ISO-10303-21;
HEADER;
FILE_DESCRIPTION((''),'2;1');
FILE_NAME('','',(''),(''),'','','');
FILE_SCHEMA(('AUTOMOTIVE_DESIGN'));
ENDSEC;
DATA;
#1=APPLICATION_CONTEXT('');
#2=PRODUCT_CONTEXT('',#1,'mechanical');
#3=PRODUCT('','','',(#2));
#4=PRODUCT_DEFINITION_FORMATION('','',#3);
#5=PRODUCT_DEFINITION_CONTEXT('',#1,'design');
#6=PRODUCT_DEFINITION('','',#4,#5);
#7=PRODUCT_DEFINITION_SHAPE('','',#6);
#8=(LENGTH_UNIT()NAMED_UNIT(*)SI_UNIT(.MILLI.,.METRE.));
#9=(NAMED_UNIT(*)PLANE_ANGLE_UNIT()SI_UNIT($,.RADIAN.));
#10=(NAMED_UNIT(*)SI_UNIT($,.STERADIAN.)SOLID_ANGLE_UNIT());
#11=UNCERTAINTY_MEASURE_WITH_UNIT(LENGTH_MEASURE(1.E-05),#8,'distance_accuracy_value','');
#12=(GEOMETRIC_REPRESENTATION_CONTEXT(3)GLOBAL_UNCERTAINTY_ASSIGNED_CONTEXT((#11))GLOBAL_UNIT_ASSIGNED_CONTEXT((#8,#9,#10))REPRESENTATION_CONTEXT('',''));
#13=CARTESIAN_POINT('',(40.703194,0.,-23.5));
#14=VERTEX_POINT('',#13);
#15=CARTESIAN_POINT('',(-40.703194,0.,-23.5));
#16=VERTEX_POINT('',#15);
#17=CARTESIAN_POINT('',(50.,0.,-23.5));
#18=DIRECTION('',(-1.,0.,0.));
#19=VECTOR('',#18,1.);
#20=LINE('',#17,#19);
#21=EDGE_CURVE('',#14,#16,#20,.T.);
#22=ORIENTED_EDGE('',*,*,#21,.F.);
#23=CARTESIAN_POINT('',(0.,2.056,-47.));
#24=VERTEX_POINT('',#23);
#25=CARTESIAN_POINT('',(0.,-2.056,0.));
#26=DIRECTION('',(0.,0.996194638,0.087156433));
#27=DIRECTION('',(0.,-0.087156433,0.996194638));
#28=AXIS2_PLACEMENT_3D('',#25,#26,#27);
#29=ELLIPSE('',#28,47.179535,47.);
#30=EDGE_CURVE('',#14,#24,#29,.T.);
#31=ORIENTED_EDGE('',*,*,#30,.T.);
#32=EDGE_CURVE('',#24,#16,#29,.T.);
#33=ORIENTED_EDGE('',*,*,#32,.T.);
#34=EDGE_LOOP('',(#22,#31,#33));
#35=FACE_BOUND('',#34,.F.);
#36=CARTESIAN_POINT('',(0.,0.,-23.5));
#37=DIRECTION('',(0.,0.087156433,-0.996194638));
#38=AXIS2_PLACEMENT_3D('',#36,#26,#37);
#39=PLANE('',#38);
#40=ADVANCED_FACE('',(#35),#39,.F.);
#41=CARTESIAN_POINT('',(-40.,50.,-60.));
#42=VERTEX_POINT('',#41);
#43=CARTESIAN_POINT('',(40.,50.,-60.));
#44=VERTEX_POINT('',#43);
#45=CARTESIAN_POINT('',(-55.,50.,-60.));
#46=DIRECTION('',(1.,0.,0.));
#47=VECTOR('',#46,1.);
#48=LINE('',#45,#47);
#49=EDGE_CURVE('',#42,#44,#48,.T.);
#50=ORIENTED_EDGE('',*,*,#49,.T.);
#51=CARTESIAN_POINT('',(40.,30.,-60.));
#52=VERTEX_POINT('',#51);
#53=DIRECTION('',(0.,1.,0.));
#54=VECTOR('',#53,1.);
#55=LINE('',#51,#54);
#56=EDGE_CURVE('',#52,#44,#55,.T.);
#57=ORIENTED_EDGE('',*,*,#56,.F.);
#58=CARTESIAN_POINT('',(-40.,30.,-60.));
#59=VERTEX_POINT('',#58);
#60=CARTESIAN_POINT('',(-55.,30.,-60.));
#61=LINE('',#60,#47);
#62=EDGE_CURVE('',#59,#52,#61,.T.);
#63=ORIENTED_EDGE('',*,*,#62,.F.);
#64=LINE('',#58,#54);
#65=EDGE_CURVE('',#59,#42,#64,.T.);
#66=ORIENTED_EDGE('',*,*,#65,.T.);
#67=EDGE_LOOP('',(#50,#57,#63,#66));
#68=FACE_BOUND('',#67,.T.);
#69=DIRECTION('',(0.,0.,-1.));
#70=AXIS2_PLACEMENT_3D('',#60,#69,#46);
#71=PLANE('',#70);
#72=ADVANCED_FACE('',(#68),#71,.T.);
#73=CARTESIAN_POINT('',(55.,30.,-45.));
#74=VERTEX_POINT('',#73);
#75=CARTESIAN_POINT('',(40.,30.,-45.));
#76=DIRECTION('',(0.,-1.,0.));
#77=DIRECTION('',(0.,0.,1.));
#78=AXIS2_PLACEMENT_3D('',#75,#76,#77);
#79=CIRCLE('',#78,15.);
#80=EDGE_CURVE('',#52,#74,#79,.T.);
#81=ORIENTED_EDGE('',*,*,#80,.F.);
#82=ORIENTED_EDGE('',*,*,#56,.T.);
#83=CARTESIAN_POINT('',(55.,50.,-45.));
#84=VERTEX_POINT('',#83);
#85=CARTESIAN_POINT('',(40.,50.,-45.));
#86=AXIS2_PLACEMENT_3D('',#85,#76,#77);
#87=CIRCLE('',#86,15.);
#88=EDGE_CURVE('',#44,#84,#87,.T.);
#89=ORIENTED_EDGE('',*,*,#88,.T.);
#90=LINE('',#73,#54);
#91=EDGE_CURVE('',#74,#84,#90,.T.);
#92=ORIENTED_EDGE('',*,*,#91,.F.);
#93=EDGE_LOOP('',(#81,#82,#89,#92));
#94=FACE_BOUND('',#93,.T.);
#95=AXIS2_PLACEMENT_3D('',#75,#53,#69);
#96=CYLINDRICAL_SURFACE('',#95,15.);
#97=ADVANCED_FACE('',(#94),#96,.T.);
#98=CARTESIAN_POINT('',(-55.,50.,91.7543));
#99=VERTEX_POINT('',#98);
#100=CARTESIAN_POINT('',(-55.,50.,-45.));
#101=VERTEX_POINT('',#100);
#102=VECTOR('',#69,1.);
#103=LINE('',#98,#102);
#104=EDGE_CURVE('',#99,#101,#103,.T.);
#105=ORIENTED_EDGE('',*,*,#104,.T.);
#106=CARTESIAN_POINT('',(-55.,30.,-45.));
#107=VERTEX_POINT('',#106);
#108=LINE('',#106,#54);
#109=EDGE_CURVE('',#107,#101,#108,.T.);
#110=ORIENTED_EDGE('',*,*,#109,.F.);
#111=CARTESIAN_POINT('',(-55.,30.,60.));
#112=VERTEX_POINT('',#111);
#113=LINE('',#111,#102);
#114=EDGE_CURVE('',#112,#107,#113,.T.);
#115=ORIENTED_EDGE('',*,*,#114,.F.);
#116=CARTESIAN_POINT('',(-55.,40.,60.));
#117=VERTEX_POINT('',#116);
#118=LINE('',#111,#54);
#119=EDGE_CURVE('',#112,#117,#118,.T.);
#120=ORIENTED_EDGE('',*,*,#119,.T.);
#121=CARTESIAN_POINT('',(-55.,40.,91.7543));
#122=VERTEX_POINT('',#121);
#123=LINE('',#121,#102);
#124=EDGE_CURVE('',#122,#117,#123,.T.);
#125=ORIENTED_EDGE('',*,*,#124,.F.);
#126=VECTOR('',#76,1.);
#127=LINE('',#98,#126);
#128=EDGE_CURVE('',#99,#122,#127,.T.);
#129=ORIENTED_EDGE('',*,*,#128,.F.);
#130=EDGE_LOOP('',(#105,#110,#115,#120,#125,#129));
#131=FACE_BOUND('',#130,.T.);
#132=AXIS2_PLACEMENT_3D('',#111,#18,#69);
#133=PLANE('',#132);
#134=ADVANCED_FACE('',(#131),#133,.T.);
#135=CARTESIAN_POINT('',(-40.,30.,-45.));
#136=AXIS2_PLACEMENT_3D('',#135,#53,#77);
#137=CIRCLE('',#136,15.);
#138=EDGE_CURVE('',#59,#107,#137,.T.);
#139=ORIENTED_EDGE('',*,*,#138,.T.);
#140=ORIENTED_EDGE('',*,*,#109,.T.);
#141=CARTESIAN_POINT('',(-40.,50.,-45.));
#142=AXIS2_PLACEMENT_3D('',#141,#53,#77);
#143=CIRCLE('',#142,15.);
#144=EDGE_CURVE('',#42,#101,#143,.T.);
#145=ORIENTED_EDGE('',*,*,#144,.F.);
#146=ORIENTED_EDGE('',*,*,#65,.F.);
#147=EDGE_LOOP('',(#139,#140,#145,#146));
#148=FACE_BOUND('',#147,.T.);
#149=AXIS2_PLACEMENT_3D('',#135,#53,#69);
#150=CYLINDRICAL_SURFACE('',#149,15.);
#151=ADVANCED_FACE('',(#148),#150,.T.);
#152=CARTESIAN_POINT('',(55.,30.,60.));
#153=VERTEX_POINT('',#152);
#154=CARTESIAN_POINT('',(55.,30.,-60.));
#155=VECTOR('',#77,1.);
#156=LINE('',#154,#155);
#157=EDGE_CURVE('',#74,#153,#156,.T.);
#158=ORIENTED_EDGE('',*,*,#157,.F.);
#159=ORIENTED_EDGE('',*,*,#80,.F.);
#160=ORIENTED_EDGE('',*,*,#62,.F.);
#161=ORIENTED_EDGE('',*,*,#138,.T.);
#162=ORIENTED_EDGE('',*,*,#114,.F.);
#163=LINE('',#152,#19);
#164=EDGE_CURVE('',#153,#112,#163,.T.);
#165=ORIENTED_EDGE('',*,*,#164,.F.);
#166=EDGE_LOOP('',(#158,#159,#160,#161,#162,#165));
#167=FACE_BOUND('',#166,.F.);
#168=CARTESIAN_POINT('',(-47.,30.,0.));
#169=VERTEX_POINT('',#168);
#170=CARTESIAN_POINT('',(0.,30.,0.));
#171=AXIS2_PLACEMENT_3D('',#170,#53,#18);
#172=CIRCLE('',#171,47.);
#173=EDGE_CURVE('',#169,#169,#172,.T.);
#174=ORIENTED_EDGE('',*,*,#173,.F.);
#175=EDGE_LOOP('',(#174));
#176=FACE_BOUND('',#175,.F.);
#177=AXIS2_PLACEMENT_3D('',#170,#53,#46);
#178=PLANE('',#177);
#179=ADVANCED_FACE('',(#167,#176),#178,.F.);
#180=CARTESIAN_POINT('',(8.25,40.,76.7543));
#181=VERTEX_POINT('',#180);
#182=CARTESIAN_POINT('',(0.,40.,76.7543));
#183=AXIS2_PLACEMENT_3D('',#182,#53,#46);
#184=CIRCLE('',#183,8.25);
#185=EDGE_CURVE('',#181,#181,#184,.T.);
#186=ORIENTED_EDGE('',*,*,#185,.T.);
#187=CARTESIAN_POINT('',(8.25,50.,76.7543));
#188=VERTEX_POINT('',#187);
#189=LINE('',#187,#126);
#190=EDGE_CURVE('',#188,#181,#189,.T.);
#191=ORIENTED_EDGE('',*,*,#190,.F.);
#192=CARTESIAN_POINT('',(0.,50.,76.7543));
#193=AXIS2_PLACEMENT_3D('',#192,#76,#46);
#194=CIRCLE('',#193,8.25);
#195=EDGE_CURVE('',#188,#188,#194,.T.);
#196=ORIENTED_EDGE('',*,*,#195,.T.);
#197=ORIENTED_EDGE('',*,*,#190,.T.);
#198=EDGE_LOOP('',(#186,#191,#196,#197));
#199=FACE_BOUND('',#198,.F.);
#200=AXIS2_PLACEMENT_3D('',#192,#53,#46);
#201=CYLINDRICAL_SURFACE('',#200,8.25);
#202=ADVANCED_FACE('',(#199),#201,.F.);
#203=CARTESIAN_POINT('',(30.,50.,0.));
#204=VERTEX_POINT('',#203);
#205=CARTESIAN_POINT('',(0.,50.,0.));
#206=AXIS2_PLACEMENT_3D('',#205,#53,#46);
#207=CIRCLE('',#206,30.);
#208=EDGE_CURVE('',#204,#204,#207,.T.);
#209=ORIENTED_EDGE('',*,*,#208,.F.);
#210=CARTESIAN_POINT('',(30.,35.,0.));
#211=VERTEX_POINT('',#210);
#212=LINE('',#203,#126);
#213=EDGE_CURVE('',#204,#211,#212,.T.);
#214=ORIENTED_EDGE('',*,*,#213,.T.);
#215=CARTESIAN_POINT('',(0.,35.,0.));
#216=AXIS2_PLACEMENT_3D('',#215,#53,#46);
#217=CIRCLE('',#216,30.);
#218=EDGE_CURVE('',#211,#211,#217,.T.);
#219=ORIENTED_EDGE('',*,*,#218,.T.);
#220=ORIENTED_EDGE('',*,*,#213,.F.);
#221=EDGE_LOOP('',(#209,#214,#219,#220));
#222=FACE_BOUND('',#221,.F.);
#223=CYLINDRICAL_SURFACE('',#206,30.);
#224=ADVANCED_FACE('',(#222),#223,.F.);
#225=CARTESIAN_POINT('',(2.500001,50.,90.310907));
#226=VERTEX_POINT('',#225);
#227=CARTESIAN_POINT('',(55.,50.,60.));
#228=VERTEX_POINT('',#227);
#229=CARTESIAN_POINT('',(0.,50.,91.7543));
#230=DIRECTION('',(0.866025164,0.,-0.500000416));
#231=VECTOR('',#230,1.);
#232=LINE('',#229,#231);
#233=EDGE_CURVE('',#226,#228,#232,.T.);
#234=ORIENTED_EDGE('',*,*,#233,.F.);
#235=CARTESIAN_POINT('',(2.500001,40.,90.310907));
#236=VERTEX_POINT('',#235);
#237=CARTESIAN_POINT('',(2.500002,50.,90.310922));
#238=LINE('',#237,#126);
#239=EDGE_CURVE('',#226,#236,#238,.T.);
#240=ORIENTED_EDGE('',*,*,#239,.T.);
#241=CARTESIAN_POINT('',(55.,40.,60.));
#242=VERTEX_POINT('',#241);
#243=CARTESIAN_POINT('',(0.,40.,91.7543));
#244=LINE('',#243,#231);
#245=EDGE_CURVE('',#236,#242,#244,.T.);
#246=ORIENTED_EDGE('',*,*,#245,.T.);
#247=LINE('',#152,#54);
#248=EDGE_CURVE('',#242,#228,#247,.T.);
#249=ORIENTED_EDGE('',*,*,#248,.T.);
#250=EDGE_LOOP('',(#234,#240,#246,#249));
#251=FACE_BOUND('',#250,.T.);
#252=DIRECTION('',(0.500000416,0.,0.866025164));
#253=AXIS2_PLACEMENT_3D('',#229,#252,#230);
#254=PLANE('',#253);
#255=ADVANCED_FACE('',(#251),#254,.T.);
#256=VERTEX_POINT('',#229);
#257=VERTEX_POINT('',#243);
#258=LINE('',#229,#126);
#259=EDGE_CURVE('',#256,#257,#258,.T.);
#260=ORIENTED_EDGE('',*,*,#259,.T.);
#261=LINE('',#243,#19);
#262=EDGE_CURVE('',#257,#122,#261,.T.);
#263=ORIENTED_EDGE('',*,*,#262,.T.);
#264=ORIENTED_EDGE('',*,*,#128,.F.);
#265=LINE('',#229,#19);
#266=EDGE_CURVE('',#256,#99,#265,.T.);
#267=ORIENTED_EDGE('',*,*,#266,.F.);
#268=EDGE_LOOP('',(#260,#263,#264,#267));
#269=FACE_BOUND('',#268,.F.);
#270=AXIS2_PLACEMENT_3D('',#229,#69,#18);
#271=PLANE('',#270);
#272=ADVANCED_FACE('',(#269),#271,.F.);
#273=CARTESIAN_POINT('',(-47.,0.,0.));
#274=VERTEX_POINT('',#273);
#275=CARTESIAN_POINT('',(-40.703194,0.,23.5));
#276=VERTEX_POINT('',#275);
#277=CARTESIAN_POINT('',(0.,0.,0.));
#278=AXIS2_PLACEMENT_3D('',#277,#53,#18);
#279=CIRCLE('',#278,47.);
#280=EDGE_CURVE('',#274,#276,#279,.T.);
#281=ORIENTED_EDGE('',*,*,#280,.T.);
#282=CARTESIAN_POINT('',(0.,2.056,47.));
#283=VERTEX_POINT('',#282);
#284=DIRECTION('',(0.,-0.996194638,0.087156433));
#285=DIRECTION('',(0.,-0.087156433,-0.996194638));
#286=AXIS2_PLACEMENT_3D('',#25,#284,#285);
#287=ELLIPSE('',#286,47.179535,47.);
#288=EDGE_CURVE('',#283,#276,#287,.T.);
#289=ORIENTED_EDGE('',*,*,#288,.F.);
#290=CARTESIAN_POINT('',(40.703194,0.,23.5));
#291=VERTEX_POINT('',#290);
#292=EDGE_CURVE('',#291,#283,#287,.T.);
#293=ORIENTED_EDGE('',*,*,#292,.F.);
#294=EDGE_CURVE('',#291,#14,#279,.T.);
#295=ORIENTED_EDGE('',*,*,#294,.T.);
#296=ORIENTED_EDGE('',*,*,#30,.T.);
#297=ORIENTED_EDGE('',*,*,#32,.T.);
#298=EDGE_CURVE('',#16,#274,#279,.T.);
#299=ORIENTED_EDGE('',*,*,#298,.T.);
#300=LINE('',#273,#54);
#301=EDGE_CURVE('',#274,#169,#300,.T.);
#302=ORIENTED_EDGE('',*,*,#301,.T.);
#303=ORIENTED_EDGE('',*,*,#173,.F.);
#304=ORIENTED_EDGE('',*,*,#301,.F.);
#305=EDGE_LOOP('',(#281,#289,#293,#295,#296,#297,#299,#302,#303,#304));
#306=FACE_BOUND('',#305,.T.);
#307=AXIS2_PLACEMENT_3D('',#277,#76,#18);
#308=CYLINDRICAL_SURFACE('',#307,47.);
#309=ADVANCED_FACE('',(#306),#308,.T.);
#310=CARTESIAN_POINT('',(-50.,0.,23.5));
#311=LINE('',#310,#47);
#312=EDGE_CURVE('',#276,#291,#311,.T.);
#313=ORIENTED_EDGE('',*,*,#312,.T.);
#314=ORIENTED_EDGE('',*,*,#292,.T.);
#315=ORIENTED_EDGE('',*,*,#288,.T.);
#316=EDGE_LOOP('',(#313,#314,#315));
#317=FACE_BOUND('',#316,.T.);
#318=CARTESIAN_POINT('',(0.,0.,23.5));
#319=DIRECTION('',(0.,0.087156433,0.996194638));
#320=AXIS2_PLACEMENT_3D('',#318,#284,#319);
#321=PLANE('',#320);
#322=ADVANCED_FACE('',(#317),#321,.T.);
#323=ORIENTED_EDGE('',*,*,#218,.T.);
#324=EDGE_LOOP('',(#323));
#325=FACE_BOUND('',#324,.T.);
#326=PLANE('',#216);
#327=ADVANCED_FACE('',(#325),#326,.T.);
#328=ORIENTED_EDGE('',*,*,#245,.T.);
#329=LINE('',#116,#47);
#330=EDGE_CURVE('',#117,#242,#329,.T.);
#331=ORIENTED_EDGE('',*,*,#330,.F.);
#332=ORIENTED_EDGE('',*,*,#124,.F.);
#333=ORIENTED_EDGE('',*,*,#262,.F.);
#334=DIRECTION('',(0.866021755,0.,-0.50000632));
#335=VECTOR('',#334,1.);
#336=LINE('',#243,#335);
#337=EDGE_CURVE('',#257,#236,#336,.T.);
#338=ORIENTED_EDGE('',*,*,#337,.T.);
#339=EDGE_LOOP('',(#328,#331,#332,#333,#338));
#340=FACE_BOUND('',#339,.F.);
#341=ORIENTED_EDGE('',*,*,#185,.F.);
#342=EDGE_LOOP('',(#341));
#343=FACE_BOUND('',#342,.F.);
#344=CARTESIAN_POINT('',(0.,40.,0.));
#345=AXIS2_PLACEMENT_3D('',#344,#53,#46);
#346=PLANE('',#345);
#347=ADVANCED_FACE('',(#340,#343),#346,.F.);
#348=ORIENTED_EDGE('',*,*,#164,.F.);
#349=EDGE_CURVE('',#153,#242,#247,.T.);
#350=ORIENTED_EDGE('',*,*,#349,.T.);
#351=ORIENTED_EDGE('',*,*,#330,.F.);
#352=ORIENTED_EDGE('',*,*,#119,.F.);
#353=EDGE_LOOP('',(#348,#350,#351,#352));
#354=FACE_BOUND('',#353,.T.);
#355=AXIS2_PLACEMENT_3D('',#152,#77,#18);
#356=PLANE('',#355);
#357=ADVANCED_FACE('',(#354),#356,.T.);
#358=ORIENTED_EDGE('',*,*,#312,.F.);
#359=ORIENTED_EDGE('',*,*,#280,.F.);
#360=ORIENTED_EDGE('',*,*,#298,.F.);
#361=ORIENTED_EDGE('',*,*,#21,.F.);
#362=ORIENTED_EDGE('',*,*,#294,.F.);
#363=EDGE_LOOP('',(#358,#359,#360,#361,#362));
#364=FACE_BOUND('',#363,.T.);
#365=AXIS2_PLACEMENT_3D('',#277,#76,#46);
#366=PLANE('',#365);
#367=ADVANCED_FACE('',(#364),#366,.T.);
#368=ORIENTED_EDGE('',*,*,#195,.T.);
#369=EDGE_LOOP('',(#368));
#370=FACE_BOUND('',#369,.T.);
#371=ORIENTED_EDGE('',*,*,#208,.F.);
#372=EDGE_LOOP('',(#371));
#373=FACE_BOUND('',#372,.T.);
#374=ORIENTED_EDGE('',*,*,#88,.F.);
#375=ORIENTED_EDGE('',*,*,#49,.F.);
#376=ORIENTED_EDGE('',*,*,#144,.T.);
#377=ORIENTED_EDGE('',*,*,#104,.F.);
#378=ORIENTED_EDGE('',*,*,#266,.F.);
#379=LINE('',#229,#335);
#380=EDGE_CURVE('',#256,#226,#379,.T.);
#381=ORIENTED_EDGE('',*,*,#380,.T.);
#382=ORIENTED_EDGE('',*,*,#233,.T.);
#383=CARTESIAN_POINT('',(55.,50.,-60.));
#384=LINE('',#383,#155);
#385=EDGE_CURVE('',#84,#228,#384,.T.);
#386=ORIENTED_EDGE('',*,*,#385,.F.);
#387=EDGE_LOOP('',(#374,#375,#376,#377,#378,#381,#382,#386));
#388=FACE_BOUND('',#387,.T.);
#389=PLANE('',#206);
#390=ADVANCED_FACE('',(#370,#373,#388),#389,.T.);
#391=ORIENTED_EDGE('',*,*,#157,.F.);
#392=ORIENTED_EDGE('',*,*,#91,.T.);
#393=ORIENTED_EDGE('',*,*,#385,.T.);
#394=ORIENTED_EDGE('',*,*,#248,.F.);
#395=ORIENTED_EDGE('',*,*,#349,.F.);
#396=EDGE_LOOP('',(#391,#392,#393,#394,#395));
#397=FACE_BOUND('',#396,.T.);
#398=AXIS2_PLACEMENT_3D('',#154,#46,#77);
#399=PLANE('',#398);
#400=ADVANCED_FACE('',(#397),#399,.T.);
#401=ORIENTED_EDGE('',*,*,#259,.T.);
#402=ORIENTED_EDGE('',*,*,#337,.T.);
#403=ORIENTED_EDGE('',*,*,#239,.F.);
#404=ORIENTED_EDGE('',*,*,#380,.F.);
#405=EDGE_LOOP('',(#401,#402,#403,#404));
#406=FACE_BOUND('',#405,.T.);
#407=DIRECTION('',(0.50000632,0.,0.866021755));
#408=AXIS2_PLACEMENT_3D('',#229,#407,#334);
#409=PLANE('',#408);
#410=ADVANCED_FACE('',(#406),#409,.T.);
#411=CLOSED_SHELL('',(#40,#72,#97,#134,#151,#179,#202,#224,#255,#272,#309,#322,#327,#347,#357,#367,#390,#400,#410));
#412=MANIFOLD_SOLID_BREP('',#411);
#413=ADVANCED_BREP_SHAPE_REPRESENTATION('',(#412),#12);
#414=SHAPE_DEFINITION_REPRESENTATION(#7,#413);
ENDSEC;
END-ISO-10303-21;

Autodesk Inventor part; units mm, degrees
ref_plane "YZ Plane" through (0, 0, 0) normal (1, 0, 0) x (0, 1, 0)
ref_plane "XZ Plane" through (0, 0, 0) normal (0, 1, 0) x (-1, 0, 0)
ref_plane "XY Plane" through (0, 0, 0) normal (0, 0, 1) x (1, 0, 0)
sketch "스케치1" plane through (0, 0, 0) normal (0, 1, 0) x (-1, 0, 0)
  circle A0 centre (0, 0) radius 47
  circle A1 centre (0, 0) radius 35
  line L0 (0, 0) -> (0, 145.5)
  circle A2 centre (0, 145.5) radius 48.5
  circle A3 centre (0, 145.5) radius 36.5
  dimension "d0" = 94
  dimension "d1" = 12
  dimension "d2" = 145.5
  dimension "d3" = 97
  dimension "d4" = 12
extrude "돌출1" add sketch "스케치1" along normal blind 30 contours A0
sketch "스케치2" plane through (0, 30, 0) normal (0, 1, 0) x (1, 0, 0)
  line L0 (-55, 60) -> (55, 60)
  line L1 (55, 60) -> (55, -60)
  line L2 (55, -60) -> (-55, -60)
  line L3 (-55, -60) -> (-55, 60)
  line L4 (-55, 60) -> (55, -60) construction
  line L5 (55, 60) -> (-55, -60) construction
  point P0 (0, 0)
  dimension "d7" = 110
  dimension "d8" = 120
extrude "돌출2" add sketch "스케치2" along normal blind 20
fillet "모깎기1" radius 15 2 edges at (-55, 40, -60) (55, 40, -60)
sketch "스케치5" plane through (0, 50, 0) normal (0, 1, 0) x (1, 0, 0)
  circle A0 centre (0, 0) radius 30
  circle A1 centre (0, 0) radius 38
  dimension "d22" = 60
  dimension "d23" = 8
extrude "돌출5" [suppressed]
sketch "스케치6" plane through (0, 50, 0) normal (0, 1, 0) x (1, 0, 0)
  circle A0 centre (0, 0) radius 30
extrude "돌출6" cut sketch "스케치6" against normal blind 15
sketch "스케치7" plane through (0, 50, 0) normal (0, 1, 0) x (1, 0, 0)
  line L0 (-55, 45) -> (-55, -60) projected
  line L1 (-55, -60) -> (0, -91.7543)
  line L2 (-55, -60) -> (8.5085, -60) construction
  line L3 (55, -60) -> (55, 45) projected
  line L4 (0, -91.7543) -> (55, -60)
  line L5 (0, -91.7543) -> (0, -76.7543)
  circle A0 centre (0, -76.7543) radius 8.25
  line L6 (-55, -60) -> (55, -60)
  point P0 (0, 0)
  dimension "d28" = 30
  dimension "d29" = 15
  dimension "d30" = 16.5
extrude "돌출7" add sketch "스케치7" against normal blind 10
fillet "모깎기2" radius 5 1 edges at (0, 45, 91.7543)
sketch "스케치8" plane through (0, 0, 0) normal (0, -1, 0) x (1, 0, 0)
  circle A0 centre (0, 0) radius 35
extrude "돌출8" add sketch "스케치8" against normal up to surface (30 mm away)
sketch "스케치9" plane through (0, 0, 0) normal (1, 0, 0) x (0, 1, 0)
  line L0 (0, -47) -> (0, 47) projected
  line L1 (0, 0) -> (0, 47)
  line L2 (0, 47) -> (0, 23.5)
  line L3 (0, 23.5) -> (2.056, 47)
  line L4 (0, 47) -> (30, 47) projected
  line L5 (0, 23.5) -> (23.5898, 23.5) construction
  line L6 (0, 0) -> (0, -47)
  line L7 (0, -23.5) -> (2.056, -47)
  line L8 (0, -47) -> (2.056, -47)
  dimension "d36" = 85
extrude "돌출9" cut sketch "스케치9" along normal mid plane 100
sketch "스케치10" plane through (0, 50, 0) normal (0, 1, 0) x (1, 0, 0)
  line L0 (-55, -60) -> (-2.5, -90.3109) projected
  line L1 (-55, -60) -> (-2.5, -90.3109)
  line L2 (-2.5, -90.3109) -> (0, -91.7543)
  line L3 (0, -91.7543) -> (-55, -91.7543)
  line L4 (-55, -91.7543) -> (-55, -60)
  line L5 (55, -60) -> (2.5, -90.3109) projected
  line L6 (0, -91.7543) -> (2.5, -90.3109)
  arc A0 (-2.5, -90.3109) -> (2.5, -90.3109) centre (0, -85.9808) ccw projected
  circle A1 centre (0, -85.9808) radius 5
  point P0 (0, 0)
  dimension "d41" = 31.7543
  dimension "d42" = 55
  dimension "d43" = 60.6218
extrude "돌출10" add sketch "스케치10" against normal up to surface (10 mm away) contours L0 L2 L3 L4 | A0 L6 L2
properties part number "bracket_2"
